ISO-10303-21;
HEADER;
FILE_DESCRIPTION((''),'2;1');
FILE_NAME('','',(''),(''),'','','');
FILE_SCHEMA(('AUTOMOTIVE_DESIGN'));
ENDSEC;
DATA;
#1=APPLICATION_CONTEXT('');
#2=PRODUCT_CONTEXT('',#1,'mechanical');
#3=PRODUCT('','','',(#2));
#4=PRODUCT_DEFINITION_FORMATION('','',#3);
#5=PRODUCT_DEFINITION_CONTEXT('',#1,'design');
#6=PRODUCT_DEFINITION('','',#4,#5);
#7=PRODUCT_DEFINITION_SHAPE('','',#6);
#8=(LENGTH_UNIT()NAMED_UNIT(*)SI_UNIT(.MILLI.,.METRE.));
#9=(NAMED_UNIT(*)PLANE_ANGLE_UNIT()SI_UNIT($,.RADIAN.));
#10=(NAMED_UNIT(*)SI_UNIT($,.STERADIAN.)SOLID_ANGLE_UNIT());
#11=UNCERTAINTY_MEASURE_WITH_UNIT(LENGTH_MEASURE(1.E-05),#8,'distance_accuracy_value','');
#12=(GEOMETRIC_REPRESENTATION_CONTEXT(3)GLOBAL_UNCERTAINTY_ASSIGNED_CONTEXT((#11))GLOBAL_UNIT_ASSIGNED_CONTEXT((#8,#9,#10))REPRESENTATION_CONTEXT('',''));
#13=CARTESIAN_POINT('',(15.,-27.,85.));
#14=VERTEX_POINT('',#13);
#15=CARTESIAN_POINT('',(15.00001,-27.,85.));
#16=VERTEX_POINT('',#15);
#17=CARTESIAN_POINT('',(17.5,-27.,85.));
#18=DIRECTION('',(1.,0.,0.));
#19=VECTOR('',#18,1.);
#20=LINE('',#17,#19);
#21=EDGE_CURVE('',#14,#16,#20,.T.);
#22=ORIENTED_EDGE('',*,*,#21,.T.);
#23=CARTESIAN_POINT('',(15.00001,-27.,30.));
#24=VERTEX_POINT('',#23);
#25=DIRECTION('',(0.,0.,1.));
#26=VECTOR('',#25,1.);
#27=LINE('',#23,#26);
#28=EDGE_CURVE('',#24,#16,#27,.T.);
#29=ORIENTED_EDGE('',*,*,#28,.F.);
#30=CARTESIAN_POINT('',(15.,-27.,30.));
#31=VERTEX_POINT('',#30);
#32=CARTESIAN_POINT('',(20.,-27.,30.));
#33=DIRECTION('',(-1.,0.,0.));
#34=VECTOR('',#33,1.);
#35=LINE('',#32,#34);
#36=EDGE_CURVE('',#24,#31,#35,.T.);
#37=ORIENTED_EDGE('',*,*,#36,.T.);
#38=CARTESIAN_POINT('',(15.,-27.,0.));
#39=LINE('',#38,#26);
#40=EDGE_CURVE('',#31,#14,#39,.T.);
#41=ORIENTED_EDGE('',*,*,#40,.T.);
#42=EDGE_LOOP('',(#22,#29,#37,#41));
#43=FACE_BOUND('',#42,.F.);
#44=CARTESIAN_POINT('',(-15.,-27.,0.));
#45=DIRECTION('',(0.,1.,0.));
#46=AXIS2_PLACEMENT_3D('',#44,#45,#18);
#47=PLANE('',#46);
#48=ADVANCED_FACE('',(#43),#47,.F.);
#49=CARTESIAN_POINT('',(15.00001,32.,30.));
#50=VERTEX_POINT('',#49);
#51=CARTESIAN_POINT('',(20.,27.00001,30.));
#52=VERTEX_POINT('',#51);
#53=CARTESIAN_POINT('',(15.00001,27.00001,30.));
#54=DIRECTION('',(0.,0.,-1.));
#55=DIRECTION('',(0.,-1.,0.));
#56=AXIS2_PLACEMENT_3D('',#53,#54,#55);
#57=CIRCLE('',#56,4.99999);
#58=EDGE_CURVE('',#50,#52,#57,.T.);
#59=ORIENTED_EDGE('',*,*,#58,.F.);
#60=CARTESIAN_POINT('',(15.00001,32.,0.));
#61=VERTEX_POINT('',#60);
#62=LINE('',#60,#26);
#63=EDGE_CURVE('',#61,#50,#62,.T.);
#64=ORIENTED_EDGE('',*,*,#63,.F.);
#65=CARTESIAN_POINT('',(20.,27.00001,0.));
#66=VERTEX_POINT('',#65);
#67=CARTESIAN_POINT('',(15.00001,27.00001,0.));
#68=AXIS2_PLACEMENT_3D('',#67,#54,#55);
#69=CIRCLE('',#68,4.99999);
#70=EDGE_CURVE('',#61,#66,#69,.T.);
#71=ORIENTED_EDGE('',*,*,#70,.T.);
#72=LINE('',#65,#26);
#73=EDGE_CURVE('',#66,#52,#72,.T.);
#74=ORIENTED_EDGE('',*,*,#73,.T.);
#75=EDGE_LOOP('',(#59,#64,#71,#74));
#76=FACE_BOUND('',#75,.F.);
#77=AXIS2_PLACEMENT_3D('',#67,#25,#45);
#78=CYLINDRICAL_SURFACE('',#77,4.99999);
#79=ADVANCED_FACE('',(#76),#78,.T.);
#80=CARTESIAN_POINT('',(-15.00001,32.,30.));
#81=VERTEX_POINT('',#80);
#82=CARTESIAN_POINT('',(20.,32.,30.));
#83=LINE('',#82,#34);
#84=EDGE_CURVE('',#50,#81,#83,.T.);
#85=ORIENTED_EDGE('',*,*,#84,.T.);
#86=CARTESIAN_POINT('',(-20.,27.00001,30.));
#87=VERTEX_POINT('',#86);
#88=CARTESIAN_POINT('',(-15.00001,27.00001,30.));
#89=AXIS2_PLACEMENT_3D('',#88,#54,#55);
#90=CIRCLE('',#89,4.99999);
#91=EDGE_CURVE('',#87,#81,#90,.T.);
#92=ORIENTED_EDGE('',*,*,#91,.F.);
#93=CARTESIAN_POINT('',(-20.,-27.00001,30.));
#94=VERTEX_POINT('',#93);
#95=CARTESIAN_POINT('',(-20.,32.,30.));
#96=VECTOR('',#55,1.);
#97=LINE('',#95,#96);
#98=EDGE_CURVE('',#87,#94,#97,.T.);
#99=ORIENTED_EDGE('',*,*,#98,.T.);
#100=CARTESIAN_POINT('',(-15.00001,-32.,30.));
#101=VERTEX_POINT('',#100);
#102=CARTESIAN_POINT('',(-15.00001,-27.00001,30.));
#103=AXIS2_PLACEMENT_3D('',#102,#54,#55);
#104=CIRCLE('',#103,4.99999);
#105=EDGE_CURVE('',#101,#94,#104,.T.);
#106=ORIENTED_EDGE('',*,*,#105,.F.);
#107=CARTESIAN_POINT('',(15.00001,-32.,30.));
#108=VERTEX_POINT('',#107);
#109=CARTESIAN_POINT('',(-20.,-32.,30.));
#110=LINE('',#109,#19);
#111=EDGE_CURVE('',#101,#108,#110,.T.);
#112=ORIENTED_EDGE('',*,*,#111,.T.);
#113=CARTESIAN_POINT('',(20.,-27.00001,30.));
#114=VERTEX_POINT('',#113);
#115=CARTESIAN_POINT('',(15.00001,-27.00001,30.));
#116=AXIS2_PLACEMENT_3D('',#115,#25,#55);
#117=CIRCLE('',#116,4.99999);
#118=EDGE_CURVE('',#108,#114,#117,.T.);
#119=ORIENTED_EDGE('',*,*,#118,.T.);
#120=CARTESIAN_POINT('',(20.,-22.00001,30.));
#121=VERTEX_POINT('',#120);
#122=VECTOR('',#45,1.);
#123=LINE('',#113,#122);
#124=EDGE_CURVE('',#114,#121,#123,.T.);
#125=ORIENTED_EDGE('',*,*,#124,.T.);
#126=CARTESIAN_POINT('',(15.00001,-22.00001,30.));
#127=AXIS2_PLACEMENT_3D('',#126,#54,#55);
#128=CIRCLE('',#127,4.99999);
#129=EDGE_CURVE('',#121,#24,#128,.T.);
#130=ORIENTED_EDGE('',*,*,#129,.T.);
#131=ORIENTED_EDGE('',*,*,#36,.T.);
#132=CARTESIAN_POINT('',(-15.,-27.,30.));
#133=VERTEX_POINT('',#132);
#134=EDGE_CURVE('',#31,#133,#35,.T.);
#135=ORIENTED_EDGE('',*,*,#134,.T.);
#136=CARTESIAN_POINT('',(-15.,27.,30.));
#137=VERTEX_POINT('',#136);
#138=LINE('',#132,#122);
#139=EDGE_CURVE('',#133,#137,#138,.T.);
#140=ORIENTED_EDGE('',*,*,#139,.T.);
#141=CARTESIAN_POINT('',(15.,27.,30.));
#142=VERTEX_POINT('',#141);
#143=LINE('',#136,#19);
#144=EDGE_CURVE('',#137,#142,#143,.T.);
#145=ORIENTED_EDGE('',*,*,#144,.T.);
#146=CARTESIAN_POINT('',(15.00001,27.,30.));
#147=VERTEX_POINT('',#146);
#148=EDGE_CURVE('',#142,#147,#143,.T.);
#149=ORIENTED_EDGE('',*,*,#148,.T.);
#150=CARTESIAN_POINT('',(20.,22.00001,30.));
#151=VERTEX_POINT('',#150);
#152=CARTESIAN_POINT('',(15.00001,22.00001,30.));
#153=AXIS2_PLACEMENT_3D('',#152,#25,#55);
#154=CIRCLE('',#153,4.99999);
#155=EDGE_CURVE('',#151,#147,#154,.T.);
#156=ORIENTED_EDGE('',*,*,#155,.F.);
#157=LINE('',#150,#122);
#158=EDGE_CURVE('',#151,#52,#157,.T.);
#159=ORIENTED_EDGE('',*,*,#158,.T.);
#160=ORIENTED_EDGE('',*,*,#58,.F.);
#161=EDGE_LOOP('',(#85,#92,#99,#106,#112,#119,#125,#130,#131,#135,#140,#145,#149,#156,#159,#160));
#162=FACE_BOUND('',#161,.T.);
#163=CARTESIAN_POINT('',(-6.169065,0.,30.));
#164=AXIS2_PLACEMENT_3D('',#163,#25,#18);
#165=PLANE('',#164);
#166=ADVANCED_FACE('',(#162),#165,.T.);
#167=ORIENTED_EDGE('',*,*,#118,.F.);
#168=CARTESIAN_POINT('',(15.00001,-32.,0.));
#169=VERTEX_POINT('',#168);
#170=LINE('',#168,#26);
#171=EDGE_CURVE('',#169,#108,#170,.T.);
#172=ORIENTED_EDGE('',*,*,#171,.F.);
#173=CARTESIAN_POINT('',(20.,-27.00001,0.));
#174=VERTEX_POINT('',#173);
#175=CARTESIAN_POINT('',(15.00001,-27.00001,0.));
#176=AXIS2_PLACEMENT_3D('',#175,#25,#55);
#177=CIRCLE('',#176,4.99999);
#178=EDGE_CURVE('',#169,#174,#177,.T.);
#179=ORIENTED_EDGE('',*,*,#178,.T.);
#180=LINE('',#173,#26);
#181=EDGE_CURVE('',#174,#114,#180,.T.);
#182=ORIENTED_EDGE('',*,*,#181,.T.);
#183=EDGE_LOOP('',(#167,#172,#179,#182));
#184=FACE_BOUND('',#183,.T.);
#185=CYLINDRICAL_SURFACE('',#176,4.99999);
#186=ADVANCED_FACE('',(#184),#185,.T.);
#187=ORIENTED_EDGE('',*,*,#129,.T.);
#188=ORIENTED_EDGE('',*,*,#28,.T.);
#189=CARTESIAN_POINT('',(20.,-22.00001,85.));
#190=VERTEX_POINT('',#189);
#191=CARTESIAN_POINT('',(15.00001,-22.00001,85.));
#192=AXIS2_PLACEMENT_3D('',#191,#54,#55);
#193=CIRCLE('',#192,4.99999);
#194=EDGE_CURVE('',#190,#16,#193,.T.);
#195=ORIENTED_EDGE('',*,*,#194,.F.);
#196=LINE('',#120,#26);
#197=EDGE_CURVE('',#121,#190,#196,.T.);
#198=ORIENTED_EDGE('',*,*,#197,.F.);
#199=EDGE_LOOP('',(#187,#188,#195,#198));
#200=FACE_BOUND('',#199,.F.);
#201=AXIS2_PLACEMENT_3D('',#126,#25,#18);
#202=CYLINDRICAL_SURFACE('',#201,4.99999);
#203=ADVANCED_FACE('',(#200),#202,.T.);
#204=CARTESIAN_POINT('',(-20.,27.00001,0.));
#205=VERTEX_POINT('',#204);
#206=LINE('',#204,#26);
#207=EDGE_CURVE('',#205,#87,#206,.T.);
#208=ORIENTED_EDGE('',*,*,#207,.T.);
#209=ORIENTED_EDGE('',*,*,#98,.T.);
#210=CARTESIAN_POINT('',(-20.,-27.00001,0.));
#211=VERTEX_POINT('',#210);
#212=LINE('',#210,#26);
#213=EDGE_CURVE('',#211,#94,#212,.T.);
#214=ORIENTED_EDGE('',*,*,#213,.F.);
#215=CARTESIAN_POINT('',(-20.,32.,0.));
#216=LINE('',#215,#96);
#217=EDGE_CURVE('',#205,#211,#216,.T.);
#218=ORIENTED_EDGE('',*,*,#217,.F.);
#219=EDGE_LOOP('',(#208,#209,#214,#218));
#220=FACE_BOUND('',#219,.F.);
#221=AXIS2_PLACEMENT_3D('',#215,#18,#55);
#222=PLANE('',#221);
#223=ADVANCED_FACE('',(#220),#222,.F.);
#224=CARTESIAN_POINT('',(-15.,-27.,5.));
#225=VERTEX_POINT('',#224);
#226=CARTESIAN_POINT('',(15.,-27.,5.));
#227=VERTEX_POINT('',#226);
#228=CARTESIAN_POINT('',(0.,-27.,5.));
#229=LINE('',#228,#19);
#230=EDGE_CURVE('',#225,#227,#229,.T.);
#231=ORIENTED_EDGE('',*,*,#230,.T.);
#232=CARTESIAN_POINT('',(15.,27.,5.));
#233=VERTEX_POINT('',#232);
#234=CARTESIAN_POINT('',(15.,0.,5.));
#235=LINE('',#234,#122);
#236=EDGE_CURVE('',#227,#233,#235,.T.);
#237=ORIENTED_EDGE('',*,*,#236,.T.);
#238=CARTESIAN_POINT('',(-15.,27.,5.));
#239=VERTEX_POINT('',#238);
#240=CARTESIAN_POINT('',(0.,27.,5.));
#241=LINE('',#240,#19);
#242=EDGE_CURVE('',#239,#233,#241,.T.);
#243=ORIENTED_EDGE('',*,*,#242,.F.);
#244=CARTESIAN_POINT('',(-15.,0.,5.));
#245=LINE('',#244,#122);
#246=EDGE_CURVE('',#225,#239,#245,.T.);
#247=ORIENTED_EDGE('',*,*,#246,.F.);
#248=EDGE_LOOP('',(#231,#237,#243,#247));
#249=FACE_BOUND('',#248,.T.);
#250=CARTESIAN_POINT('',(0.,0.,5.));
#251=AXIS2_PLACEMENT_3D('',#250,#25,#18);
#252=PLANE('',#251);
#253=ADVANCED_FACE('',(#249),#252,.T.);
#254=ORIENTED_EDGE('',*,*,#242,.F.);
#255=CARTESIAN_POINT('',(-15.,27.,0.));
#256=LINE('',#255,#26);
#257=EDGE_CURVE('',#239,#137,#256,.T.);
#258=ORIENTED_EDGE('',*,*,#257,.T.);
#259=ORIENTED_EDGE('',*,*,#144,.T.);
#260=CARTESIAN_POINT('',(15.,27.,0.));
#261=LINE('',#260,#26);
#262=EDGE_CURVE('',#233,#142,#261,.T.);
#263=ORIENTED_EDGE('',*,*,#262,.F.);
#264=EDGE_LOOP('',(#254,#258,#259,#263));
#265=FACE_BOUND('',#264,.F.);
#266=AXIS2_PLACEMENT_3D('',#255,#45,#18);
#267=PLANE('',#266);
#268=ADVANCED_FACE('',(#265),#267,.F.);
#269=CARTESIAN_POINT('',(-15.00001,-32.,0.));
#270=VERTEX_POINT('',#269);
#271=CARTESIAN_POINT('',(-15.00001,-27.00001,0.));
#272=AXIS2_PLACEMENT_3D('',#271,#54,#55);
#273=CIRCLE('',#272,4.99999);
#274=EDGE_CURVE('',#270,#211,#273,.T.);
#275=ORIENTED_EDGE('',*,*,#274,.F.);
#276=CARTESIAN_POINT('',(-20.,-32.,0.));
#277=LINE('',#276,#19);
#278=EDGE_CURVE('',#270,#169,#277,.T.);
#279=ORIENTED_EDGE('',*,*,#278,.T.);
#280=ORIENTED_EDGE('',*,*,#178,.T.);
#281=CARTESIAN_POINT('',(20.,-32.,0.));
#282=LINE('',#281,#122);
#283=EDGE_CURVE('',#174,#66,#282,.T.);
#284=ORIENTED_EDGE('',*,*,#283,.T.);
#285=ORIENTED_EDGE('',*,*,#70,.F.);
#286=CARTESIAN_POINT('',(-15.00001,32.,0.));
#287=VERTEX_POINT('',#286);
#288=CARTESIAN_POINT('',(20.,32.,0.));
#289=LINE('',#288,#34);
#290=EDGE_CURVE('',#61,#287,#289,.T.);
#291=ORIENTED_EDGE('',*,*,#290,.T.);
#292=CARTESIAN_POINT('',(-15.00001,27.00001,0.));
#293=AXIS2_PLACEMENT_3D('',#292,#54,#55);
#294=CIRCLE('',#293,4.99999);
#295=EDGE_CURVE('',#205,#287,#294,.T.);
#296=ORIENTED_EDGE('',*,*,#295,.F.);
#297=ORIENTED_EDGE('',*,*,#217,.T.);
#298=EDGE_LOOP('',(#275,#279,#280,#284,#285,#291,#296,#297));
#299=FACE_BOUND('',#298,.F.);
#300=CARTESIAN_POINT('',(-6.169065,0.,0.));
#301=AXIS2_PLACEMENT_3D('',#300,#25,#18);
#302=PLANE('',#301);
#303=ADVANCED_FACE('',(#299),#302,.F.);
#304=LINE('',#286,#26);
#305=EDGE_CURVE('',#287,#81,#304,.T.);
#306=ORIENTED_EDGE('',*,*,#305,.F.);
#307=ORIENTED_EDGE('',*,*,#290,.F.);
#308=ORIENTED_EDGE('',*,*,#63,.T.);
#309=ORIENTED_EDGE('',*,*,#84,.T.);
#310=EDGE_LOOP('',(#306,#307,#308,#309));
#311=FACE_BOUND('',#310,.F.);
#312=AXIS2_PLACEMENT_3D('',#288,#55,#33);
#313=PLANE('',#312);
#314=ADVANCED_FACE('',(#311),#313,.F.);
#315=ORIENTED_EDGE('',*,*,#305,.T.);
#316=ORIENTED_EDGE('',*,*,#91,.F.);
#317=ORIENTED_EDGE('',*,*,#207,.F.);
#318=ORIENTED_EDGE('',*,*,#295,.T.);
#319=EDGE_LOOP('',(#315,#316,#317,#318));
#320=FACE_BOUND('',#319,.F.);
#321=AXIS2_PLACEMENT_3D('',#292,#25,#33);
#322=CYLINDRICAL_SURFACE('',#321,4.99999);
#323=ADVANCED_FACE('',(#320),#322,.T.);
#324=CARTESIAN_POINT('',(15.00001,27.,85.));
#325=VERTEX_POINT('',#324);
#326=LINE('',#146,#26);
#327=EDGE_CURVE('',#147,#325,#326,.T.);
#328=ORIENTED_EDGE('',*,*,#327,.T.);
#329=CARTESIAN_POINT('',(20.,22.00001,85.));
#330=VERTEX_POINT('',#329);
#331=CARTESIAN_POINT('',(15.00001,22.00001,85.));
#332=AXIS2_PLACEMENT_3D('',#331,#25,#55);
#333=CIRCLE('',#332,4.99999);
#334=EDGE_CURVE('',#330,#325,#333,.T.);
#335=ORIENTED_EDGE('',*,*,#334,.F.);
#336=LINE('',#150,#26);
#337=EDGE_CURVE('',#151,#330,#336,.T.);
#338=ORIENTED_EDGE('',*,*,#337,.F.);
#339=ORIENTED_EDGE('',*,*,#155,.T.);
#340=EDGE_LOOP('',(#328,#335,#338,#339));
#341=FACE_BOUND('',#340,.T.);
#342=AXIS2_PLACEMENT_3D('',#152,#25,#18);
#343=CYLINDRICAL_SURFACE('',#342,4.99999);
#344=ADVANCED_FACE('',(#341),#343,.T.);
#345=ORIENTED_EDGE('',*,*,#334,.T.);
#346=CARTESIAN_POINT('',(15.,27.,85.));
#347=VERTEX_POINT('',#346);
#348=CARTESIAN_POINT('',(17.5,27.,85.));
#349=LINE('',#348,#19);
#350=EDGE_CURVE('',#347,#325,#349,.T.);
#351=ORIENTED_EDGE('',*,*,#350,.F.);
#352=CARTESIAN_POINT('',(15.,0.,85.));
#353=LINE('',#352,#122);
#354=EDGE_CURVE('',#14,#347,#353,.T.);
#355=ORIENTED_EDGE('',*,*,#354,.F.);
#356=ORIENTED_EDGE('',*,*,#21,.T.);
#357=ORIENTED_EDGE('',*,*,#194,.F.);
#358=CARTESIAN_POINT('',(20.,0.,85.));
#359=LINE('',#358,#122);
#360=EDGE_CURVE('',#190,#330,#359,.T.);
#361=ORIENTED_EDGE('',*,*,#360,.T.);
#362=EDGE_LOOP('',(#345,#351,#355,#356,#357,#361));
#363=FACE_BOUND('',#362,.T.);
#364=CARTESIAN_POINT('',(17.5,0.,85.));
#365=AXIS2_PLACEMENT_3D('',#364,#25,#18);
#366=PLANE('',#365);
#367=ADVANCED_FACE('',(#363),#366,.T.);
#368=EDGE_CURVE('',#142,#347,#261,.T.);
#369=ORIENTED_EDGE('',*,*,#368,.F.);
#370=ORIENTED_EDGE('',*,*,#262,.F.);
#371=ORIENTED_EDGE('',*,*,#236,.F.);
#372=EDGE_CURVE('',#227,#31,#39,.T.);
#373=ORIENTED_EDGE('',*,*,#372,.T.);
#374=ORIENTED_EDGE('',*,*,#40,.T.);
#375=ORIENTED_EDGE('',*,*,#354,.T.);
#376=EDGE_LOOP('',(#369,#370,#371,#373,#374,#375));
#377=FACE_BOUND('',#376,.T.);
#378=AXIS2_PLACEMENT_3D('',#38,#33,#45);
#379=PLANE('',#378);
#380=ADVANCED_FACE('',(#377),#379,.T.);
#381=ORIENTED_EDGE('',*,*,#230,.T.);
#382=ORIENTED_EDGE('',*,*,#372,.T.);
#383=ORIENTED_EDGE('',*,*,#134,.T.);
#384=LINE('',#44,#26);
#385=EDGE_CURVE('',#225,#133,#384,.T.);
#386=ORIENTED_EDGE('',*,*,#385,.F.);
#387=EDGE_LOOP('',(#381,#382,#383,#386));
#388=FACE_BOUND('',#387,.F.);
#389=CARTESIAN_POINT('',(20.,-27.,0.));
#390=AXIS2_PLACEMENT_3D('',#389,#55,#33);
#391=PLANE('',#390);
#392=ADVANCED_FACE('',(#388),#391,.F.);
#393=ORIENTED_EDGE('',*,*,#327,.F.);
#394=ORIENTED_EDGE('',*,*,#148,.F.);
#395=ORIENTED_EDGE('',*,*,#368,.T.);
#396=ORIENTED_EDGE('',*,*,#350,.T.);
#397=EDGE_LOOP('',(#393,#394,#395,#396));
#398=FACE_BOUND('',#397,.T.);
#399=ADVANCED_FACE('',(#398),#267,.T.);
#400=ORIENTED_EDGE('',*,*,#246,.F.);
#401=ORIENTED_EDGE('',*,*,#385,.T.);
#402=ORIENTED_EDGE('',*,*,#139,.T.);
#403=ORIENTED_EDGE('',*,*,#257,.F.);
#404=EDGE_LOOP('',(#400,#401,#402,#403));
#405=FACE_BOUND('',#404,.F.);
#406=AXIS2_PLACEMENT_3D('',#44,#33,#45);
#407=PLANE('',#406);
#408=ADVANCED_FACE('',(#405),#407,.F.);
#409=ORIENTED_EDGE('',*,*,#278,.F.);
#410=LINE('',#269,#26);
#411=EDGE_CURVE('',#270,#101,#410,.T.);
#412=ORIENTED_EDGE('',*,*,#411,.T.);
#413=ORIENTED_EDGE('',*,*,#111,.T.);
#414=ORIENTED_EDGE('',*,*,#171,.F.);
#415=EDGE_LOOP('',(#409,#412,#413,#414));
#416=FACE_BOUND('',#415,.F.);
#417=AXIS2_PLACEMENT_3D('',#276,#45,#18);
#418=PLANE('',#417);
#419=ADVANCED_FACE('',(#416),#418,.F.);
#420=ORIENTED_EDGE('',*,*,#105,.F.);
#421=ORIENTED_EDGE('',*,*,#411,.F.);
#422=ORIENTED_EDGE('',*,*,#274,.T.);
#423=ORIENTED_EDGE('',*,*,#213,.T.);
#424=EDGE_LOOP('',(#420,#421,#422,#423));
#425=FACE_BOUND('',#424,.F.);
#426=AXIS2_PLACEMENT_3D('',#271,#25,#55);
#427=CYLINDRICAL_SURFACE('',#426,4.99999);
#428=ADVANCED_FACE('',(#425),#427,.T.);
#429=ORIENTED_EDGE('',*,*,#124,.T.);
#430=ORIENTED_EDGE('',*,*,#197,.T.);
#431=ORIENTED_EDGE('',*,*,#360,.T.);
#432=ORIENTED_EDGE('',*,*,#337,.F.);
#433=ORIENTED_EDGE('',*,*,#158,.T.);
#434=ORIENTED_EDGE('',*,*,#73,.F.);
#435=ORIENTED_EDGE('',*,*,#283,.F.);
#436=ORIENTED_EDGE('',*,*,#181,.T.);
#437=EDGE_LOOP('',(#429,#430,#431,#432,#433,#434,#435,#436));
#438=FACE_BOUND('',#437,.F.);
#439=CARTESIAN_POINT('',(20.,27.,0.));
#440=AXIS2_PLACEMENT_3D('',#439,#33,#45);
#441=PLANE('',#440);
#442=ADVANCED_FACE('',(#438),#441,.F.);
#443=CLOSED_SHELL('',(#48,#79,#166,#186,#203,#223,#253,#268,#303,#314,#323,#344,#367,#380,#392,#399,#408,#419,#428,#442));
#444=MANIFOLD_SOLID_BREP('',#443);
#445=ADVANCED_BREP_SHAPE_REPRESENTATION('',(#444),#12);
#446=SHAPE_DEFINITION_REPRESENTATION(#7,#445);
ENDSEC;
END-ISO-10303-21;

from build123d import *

# Parameters (mm, degrees)
F0_W     = 5
F0_H     = 54
F1_DEPTH = 85
F0_W_2   = 30
F2_DEPTH = 5
F3_DEPTH = 30
F4_R     = 4.99999


# Not quite as in the source:
# - a fillet or chamfer is up to 0.001 mm smaller than in the source, because OpenCascade refuses the exact size


with BuildPart() as f1:
    # F0 (on Top) → F1 (new body)
    with BuildSketch(Plane.XY):
        with Locations((17.5, 0)):
            Rectangle(F0_W, F0_H)
    extrude(amount=F1_DEPTH)

    # F0 (on Top) → F2 (join)
    with BuildSketch(Plane.XY):
        Rectangle(F0_W_2, F0_H)
    extrude(amount=F2_DEPTH)

    # F0 (on Top) → F3 (join)
    with BuildSketch(Plane.XY):
        Polygon((20, -27), (15, -27), (-15, -27), (-15, 27), (15, 27), (20, 27), (20, 32), (-20, 32), (-20, -31.9579449729), (-20, -32), (20, -32), align=None)
    extrude(amount=F3_DEPTH)

    # F4 (radius 5 in the source; OpenCascade refuses exactly that, so slightly less here)
    f4_edges = [f1.edges().sort_by_distance(p)[0] for p in [
        (-20, -32, 15),
        (20, -32, 15),
        (20, 32, 15),
        (-20, 32, 15),
        (20, 27, 57.5),
        (20, -27, 57.5),
    ]]
    fillet(f4_edges, radius=F4_R)


solid = f1.part
